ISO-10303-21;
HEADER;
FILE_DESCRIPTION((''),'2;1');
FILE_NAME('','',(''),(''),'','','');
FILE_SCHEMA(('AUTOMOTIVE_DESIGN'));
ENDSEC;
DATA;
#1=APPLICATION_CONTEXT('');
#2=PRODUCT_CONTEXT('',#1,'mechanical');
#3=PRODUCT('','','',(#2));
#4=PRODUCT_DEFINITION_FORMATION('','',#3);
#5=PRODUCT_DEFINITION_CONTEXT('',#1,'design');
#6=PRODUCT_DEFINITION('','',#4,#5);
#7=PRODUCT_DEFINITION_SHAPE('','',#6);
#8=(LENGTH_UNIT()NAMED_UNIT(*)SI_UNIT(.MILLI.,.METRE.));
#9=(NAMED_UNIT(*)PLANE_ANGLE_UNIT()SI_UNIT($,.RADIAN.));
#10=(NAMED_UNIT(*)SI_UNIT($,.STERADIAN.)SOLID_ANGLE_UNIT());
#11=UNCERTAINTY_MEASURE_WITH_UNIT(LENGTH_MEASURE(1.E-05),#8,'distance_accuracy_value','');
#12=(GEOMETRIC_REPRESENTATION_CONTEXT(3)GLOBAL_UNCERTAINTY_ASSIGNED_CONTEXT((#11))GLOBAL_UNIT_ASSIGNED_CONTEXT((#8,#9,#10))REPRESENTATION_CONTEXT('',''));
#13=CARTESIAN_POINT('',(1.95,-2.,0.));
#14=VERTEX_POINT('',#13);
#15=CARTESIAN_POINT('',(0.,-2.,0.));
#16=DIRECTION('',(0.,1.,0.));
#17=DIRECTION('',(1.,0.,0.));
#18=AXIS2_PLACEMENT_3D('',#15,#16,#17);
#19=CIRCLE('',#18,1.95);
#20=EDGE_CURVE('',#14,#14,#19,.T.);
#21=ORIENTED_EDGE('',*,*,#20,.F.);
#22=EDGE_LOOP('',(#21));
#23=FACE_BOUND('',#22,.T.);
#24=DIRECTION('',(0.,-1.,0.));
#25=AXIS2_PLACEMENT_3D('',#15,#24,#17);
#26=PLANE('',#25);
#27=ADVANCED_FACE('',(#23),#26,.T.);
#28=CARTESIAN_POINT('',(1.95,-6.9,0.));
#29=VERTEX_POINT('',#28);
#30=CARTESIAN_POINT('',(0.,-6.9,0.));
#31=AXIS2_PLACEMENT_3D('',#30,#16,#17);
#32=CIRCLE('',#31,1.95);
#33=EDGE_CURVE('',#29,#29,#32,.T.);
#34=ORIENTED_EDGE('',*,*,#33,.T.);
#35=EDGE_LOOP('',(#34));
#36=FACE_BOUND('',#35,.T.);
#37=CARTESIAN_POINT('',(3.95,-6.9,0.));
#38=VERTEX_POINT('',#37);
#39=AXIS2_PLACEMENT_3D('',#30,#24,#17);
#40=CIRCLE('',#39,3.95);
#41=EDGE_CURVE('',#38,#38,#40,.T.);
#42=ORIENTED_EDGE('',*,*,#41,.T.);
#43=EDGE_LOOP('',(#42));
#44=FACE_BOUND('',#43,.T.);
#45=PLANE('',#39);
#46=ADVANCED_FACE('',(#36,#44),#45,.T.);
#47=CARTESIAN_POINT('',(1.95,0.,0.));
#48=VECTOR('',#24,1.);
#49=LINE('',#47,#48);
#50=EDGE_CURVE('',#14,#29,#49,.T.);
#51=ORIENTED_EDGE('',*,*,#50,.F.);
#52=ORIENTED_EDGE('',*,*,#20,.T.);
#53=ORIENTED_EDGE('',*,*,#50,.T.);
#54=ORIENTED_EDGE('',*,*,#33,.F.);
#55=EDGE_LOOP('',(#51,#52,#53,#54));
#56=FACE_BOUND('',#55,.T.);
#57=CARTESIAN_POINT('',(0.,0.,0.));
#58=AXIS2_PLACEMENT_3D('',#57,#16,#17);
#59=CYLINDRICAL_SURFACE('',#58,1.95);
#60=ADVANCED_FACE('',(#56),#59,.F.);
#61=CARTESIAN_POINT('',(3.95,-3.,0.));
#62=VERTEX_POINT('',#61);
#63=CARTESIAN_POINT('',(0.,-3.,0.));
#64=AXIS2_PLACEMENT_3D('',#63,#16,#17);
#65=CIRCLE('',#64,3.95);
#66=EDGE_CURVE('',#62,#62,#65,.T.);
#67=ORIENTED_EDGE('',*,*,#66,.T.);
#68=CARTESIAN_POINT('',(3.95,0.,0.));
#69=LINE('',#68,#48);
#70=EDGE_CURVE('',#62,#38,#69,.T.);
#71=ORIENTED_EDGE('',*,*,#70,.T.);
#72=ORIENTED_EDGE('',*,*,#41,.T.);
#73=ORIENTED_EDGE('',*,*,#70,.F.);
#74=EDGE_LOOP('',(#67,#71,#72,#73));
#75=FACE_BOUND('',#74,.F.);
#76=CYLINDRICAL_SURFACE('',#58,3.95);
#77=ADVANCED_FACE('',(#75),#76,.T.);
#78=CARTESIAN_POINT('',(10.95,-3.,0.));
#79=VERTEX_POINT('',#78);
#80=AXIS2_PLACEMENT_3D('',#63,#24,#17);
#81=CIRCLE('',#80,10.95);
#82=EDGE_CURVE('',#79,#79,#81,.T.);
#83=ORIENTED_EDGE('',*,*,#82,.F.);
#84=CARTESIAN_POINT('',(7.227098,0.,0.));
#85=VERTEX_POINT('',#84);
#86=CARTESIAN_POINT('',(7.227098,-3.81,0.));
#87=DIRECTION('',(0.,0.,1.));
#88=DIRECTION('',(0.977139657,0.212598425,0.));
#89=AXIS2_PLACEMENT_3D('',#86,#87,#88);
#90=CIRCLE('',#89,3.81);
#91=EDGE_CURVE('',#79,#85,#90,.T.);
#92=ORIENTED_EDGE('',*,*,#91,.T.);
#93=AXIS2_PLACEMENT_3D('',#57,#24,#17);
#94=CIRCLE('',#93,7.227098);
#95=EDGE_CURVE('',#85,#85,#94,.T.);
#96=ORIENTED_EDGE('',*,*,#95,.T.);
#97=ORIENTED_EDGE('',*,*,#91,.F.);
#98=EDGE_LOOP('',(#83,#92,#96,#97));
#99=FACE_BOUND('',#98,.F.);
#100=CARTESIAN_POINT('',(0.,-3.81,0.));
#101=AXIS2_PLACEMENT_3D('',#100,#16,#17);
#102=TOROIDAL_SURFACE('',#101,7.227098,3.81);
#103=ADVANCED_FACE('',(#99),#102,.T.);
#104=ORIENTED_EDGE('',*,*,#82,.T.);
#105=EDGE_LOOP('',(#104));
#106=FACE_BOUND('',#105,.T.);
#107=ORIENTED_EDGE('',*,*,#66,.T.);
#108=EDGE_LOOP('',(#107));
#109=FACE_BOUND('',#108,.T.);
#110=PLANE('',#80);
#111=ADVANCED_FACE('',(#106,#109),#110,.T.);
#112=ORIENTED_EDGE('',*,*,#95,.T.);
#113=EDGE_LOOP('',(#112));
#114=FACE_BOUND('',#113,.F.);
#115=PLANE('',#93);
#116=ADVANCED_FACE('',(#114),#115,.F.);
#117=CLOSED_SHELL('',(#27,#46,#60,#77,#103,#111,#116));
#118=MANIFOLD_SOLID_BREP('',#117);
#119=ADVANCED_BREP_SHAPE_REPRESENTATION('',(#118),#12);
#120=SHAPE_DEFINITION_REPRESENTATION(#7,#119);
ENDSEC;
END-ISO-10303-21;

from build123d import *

# Parameters (mm, degrees)
F0_R     = 10.95
F1_DEPTH = 3
F2_R     = 3.95
F3_DEPTH = 6.9
F4_T     = -2


# Not quite as in the source:
# - a fillet or chamfer that OpenCascade refuses, or shapes differently, is made with other operations: its cross-section is extruded or revolved along the edge and cut away or added


with BuildPart() as f1:
    # F0 (on Front) → F1 (new body)
    with BuildSketch(Plane.XZ):
        Circle(F0_R)
    extrude(amount=F1_DEPTH)

    # F2 (on Front) → F3 (join)
    with BuildSketch(Plane.XZ):
        Circle(F2_R)
    extrude(amount=F3_DEPTH)

    # F4
    f4_openings = [f1.faces().sort_by_distance(p)[0] for p in [
        (0, -6.9, 0),
    ]]
    offset(amount=F4_T, openings=f4_openings, kind=Kind.INTERSECTION)

    # F5: fillet of radius 3.81 on 1 edges, made by hand

    # F5_s1 → F5_t2 (revolve, cut)
    with BuildSketch(Plane.XY):
        with BuildLine():
            ThreePointArc((10.95, -3), (9.6177045238, -0.843335206), (7.2270979062, 0))
            Line((7.2270979062, 0), (10.95, 0))
            Line((10.95, 0), (10.95, -3))
        make_face()
    revolve(axis=Axis((0, 0, 0), (0, -1, 0)), mode=Mode.SUBTRACT)


solid = f1.part
